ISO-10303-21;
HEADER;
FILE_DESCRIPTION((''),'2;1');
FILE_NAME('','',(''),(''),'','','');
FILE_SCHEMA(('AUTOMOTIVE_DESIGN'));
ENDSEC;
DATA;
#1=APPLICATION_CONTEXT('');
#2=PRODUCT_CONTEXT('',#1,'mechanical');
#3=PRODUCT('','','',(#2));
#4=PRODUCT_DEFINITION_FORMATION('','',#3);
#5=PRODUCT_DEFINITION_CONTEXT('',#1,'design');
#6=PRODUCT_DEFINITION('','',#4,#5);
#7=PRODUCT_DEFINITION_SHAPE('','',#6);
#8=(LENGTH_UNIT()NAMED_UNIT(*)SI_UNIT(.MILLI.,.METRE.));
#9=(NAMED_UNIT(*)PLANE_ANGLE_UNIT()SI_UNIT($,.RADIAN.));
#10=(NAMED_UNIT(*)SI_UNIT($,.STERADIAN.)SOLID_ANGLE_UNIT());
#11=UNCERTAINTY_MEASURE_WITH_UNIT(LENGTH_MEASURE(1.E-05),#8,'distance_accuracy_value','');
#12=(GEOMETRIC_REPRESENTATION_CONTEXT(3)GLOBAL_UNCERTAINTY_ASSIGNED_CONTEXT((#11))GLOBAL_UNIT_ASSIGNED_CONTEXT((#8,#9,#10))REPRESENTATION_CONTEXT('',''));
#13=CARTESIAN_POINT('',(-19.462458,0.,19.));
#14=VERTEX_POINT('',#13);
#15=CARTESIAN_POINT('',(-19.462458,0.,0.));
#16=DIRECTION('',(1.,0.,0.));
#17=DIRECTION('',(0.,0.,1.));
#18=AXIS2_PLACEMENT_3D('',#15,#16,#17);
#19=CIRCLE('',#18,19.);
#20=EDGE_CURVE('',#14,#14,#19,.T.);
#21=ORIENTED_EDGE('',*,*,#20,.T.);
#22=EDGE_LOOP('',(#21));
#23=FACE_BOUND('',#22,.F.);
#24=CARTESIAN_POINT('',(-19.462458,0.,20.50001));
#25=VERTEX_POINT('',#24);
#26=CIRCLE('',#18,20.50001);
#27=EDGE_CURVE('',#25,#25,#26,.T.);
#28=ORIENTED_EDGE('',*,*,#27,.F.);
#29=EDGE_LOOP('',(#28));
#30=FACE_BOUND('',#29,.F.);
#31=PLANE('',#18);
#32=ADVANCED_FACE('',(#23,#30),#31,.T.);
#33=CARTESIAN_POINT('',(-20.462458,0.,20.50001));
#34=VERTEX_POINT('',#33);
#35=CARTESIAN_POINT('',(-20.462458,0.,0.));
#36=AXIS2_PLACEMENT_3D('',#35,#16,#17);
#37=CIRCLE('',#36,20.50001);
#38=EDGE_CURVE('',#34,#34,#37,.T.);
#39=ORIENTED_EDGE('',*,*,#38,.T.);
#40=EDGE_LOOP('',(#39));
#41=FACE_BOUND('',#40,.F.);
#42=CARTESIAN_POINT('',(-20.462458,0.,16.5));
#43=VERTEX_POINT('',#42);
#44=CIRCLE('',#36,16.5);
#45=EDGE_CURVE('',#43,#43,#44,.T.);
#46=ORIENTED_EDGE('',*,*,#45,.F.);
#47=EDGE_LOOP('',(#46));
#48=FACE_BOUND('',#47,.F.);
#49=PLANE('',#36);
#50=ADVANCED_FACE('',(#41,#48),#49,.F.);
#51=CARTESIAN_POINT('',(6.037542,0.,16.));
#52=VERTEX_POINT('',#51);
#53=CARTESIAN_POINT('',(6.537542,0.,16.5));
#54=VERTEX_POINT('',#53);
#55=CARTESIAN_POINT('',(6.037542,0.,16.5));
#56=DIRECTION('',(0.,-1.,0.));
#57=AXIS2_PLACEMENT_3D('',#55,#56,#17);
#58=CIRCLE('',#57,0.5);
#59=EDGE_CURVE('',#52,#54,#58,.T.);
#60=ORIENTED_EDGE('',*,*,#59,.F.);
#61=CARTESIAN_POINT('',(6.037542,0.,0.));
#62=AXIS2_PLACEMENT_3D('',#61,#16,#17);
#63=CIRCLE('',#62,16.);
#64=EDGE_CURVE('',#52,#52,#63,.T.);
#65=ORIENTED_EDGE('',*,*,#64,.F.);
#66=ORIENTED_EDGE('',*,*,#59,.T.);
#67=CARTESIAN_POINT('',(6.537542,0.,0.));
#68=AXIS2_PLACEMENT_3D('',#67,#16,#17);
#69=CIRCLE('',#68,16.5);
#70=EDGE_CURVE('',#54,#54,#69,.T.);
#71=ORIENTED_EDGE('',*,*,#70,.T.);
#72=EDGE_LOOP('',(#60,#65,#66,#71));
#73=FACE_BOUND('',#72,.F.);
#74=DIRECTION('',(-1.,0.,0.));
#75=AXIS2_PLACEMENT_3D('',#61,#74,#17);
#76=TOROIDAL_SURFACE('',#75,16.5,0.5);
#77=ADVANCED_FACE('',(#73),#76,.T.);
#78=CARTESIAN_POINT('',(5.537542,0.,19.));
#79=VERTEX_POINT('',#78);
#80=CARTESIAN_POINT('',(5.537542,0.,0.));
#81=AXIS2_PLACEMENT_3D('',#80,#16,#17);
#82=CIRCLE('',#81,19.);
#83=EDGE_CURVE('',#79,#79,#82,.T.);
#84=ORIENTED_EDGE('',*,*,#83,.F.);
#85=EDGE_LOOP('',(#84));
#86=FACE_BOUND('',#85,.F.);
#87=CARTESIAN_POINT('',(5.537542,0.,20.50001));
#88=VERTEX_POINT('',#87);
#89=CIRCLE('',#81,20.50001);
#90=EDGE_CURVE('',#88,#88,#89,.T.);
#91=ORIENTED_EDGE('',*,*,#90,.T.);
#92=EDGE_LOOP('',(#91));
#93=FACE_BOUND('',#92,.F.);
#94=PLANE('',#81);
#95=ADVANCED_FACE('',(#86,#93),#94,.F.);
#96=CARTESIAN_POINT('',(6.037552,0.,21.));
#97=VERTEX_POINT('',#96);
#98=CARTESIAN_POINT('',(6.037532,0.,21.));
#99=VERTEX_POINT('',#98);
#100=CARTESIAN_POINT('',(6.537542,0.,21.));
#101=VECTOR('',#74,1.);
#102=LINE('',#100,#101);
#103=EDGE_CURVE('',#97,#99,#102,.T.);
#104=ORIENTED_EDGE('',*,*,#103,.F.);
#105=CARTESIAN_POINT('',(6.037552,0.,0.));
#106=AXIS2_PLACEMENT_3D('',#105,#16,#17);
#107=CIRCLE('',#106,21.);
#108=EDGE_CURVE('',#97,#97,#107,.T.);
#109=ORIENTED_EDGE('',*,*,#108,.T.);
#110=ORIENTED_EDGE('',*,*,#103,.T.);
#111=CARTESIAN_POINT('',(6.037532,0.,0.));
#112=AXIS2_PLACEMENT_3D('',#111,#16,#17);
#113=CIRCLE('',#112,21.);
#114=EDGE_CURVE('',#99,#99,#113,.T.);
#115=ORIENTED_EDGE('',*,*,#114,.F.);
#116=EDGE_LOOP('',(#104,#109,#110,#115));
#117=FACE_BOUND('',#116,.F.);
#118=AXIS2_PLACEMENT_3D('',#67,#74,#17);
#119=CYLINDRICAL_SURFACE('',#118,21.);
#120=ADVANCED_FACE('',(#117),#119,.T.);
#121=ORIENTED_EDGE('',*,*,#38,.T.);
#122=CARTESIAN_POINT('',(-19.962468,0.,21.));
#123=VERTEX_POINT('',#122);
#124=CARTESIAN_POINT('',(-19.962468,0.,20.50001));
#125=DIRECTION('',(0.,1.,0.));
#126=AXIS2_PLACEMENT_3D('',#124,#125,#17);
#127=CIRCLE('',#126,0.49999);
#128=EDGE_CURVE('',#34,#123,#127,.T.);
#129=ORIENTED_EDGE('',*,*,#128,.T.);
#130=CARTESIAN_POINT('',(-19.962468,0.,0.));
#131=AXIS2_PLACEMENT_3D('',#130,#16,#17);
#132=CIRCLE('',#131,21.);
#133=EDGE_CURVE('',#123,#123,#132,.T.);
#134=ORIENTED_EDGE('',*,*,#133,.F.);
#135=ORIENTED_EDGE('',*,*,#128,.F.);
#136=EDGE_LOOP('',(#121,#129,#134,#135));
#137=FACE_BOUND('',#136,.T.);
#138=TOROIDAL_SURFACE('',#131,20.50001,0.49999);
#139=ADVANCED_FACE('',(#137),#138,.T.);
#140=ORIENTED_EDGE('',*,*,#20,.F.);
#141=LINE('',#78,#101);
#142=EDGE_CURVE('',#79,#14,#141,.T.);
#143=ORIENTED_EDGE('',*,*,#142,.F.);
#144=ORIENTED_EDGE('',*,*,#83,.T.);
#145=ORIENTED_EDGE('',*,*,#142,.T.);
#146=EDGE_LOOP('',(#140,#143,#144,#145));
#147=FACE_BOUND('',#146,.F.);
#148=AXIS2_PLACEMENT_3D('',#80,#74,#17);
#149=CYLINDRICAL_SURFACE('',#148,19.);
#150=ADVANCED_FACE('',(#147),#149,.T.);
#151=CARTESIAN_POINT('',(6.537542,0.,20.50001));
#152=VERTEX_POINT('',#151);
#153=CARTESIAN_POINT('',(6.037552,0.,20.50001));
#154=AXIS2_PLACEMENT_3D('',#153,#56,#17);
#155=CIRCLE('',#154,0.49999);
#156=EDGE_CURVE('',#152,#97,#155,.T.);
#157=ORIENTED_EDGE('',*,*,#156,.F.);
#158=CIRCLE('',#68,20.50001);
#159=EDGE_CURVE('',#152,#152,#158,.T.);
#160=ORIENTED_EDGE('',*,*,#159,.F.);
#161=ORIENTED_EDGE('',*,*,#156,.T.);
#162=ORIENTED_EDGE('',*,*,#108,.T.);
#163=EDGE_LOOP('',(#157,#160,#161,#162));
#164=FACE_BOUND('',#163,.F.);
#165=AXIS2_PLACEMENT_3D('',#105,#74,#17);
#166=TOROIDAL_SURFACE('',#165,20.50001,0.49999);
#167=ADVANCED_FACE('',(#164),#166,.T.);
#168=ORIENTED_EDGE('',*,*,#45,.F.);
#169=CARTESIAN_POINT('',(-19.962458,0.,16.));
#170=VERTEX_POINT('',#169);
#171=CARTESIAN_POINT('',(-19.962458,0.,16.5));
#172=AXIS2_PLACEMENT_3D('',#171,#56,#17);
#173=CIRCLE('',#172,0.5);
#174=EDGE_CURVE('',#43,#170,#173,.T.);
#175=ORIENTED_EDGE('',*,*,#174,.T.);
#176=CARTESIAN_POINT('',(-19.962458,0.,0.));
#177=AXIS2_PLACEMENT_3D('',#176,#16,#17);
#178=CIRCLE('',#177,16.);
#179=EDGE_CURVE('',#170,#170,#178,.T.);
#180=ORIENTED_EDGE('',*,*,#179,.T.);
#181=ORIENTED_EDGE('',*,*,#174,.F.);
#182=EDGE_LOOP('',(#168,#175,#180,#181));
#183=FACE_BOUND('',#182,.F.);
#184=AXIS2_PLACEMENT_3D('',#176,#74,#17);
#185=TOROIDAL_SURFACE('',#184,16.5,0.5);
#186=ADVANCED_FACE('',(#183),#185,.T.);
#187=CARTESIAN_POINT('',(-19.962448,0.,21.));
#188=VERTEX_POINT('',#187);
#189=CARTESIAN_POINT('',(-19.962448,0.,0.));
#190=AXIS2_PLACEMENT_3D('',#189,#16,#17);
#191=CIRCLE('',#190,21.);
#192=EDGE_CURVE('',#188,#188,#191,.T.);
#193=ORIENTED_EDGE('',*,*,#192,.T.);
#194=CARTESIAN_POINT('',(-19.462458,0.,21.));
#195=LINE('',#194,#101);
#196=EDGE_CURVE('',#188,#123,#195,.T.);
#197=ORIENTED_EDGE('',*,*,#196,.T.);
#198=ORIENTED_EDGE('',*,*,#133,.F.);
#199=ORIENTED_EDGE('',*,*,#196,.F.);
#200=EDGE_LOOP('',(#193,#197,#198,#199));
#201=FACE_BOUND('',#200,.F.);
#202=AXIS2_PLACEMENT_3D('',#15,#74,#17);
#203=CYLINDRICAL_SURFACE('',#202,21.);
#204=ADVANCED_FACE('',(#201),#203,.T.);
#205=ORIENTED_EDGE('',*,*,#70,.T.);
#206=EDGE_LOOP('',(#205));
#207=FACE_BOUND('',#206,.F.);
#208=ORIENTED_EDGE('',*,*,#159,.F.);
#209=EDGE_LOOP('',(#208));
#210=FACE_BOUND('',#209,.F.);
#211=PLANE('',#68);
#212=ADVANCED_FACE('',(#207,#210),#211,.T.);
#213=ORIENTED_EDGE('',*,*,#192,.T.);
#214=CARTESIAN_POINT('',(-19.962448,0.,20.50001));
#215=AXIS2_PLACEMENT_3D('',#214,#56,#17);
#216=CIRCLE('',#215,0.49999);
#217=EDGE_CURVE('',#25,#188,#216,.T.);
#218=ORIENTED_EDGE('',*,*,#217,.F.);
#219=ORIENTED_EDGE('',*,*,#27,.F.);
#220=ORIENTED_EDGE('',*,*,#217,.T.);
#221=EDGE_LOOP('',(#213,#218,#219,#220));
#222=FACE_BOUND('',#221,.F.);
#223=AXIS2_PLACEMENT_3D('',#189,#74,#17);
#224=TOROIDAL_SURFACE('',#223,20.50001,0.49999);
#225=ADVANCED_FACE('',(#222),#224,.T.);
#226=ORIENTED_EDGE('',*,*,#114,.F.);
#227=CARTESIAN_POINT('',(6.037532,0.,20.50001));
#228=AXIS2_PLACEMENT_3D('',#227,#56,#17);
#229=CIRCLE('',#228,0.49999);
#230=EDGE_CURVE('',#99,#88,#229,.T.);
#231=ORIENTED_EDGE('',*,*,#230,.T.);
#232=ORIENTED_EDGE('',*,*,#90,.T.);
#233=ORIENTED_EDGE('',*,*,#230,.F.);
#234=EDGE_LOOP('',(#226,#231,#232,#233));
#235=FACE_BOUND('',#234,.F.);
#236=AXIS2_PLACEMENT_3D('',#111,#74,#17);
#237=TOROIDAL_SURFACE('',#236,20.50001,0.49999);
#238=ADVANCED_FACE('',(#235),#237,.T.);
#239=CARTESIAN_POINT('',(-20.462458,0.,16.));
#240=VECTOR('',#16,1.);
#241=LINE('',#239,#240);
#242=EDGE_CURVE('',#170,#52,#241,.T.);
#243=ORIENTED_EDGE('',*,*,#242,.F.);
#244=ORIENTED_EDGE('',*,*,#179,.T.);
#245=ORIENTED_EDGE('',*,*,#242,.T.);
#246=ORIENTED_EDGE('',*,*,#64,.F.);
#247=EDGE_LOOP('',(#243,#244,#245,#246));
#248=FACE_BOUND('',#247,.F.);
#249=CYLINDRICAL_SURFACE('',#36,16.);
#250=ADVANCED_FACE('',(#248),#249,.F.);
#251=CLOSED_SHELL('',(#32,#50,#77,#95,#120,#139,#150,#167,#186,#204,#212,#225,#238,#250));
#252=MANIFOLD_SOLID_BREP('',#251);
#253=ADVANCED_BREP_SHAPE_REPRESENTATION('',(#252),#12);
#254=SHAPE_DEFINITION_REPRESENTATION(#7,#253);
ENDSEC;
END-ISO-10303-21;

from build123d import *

# Parameters (mm, degrees)
F3_R = 0.49999
F4_R = 0.5


# Not quite as in the source:
# - a fillet or chamfer is up to 0.001 mm smaller than in the source, because OpenCascade refuses the exact size


with BuildPart() as f2:
    # F0 (on Front) → F2 (revolve)
    with BuildSketch(Plane.XZ):
        Polygon((-20.462457691, 21), (-20.462457691, 16), (6.537542309, 16), (6.537542309, 21), (5.537542309, 21), (5.537542309, 19), (-19.462457691, 19), (-19.462457691, 21), align=None)
    revolve(axis=Axis((-6.0107018799, 0, 0), (1, 0, 0)))

    # F3 (radius 0.5 in the source; OpenCascade refuses exactly that, so slightly less here)
    f3_edges = [f2.edges().sort_by_distance(p)[0] for p in [
        (6.537542, 0, -21),
        (5.537542, 0, -21),
        (-19.462458, 0, -21),
        (-20.462458, 0, -21),
    ]]
    fillet(f3_edges, radius=F3_R)

    # F4
    f4_edges = [f2.edges().sort_by_distance(p)[0] for p in [
        (-20.462458, 0, -16),
        (6.537542, 0, -16),
    ]]
    fillet(f4_edges, radius=F4_R)


solid = f2.part
